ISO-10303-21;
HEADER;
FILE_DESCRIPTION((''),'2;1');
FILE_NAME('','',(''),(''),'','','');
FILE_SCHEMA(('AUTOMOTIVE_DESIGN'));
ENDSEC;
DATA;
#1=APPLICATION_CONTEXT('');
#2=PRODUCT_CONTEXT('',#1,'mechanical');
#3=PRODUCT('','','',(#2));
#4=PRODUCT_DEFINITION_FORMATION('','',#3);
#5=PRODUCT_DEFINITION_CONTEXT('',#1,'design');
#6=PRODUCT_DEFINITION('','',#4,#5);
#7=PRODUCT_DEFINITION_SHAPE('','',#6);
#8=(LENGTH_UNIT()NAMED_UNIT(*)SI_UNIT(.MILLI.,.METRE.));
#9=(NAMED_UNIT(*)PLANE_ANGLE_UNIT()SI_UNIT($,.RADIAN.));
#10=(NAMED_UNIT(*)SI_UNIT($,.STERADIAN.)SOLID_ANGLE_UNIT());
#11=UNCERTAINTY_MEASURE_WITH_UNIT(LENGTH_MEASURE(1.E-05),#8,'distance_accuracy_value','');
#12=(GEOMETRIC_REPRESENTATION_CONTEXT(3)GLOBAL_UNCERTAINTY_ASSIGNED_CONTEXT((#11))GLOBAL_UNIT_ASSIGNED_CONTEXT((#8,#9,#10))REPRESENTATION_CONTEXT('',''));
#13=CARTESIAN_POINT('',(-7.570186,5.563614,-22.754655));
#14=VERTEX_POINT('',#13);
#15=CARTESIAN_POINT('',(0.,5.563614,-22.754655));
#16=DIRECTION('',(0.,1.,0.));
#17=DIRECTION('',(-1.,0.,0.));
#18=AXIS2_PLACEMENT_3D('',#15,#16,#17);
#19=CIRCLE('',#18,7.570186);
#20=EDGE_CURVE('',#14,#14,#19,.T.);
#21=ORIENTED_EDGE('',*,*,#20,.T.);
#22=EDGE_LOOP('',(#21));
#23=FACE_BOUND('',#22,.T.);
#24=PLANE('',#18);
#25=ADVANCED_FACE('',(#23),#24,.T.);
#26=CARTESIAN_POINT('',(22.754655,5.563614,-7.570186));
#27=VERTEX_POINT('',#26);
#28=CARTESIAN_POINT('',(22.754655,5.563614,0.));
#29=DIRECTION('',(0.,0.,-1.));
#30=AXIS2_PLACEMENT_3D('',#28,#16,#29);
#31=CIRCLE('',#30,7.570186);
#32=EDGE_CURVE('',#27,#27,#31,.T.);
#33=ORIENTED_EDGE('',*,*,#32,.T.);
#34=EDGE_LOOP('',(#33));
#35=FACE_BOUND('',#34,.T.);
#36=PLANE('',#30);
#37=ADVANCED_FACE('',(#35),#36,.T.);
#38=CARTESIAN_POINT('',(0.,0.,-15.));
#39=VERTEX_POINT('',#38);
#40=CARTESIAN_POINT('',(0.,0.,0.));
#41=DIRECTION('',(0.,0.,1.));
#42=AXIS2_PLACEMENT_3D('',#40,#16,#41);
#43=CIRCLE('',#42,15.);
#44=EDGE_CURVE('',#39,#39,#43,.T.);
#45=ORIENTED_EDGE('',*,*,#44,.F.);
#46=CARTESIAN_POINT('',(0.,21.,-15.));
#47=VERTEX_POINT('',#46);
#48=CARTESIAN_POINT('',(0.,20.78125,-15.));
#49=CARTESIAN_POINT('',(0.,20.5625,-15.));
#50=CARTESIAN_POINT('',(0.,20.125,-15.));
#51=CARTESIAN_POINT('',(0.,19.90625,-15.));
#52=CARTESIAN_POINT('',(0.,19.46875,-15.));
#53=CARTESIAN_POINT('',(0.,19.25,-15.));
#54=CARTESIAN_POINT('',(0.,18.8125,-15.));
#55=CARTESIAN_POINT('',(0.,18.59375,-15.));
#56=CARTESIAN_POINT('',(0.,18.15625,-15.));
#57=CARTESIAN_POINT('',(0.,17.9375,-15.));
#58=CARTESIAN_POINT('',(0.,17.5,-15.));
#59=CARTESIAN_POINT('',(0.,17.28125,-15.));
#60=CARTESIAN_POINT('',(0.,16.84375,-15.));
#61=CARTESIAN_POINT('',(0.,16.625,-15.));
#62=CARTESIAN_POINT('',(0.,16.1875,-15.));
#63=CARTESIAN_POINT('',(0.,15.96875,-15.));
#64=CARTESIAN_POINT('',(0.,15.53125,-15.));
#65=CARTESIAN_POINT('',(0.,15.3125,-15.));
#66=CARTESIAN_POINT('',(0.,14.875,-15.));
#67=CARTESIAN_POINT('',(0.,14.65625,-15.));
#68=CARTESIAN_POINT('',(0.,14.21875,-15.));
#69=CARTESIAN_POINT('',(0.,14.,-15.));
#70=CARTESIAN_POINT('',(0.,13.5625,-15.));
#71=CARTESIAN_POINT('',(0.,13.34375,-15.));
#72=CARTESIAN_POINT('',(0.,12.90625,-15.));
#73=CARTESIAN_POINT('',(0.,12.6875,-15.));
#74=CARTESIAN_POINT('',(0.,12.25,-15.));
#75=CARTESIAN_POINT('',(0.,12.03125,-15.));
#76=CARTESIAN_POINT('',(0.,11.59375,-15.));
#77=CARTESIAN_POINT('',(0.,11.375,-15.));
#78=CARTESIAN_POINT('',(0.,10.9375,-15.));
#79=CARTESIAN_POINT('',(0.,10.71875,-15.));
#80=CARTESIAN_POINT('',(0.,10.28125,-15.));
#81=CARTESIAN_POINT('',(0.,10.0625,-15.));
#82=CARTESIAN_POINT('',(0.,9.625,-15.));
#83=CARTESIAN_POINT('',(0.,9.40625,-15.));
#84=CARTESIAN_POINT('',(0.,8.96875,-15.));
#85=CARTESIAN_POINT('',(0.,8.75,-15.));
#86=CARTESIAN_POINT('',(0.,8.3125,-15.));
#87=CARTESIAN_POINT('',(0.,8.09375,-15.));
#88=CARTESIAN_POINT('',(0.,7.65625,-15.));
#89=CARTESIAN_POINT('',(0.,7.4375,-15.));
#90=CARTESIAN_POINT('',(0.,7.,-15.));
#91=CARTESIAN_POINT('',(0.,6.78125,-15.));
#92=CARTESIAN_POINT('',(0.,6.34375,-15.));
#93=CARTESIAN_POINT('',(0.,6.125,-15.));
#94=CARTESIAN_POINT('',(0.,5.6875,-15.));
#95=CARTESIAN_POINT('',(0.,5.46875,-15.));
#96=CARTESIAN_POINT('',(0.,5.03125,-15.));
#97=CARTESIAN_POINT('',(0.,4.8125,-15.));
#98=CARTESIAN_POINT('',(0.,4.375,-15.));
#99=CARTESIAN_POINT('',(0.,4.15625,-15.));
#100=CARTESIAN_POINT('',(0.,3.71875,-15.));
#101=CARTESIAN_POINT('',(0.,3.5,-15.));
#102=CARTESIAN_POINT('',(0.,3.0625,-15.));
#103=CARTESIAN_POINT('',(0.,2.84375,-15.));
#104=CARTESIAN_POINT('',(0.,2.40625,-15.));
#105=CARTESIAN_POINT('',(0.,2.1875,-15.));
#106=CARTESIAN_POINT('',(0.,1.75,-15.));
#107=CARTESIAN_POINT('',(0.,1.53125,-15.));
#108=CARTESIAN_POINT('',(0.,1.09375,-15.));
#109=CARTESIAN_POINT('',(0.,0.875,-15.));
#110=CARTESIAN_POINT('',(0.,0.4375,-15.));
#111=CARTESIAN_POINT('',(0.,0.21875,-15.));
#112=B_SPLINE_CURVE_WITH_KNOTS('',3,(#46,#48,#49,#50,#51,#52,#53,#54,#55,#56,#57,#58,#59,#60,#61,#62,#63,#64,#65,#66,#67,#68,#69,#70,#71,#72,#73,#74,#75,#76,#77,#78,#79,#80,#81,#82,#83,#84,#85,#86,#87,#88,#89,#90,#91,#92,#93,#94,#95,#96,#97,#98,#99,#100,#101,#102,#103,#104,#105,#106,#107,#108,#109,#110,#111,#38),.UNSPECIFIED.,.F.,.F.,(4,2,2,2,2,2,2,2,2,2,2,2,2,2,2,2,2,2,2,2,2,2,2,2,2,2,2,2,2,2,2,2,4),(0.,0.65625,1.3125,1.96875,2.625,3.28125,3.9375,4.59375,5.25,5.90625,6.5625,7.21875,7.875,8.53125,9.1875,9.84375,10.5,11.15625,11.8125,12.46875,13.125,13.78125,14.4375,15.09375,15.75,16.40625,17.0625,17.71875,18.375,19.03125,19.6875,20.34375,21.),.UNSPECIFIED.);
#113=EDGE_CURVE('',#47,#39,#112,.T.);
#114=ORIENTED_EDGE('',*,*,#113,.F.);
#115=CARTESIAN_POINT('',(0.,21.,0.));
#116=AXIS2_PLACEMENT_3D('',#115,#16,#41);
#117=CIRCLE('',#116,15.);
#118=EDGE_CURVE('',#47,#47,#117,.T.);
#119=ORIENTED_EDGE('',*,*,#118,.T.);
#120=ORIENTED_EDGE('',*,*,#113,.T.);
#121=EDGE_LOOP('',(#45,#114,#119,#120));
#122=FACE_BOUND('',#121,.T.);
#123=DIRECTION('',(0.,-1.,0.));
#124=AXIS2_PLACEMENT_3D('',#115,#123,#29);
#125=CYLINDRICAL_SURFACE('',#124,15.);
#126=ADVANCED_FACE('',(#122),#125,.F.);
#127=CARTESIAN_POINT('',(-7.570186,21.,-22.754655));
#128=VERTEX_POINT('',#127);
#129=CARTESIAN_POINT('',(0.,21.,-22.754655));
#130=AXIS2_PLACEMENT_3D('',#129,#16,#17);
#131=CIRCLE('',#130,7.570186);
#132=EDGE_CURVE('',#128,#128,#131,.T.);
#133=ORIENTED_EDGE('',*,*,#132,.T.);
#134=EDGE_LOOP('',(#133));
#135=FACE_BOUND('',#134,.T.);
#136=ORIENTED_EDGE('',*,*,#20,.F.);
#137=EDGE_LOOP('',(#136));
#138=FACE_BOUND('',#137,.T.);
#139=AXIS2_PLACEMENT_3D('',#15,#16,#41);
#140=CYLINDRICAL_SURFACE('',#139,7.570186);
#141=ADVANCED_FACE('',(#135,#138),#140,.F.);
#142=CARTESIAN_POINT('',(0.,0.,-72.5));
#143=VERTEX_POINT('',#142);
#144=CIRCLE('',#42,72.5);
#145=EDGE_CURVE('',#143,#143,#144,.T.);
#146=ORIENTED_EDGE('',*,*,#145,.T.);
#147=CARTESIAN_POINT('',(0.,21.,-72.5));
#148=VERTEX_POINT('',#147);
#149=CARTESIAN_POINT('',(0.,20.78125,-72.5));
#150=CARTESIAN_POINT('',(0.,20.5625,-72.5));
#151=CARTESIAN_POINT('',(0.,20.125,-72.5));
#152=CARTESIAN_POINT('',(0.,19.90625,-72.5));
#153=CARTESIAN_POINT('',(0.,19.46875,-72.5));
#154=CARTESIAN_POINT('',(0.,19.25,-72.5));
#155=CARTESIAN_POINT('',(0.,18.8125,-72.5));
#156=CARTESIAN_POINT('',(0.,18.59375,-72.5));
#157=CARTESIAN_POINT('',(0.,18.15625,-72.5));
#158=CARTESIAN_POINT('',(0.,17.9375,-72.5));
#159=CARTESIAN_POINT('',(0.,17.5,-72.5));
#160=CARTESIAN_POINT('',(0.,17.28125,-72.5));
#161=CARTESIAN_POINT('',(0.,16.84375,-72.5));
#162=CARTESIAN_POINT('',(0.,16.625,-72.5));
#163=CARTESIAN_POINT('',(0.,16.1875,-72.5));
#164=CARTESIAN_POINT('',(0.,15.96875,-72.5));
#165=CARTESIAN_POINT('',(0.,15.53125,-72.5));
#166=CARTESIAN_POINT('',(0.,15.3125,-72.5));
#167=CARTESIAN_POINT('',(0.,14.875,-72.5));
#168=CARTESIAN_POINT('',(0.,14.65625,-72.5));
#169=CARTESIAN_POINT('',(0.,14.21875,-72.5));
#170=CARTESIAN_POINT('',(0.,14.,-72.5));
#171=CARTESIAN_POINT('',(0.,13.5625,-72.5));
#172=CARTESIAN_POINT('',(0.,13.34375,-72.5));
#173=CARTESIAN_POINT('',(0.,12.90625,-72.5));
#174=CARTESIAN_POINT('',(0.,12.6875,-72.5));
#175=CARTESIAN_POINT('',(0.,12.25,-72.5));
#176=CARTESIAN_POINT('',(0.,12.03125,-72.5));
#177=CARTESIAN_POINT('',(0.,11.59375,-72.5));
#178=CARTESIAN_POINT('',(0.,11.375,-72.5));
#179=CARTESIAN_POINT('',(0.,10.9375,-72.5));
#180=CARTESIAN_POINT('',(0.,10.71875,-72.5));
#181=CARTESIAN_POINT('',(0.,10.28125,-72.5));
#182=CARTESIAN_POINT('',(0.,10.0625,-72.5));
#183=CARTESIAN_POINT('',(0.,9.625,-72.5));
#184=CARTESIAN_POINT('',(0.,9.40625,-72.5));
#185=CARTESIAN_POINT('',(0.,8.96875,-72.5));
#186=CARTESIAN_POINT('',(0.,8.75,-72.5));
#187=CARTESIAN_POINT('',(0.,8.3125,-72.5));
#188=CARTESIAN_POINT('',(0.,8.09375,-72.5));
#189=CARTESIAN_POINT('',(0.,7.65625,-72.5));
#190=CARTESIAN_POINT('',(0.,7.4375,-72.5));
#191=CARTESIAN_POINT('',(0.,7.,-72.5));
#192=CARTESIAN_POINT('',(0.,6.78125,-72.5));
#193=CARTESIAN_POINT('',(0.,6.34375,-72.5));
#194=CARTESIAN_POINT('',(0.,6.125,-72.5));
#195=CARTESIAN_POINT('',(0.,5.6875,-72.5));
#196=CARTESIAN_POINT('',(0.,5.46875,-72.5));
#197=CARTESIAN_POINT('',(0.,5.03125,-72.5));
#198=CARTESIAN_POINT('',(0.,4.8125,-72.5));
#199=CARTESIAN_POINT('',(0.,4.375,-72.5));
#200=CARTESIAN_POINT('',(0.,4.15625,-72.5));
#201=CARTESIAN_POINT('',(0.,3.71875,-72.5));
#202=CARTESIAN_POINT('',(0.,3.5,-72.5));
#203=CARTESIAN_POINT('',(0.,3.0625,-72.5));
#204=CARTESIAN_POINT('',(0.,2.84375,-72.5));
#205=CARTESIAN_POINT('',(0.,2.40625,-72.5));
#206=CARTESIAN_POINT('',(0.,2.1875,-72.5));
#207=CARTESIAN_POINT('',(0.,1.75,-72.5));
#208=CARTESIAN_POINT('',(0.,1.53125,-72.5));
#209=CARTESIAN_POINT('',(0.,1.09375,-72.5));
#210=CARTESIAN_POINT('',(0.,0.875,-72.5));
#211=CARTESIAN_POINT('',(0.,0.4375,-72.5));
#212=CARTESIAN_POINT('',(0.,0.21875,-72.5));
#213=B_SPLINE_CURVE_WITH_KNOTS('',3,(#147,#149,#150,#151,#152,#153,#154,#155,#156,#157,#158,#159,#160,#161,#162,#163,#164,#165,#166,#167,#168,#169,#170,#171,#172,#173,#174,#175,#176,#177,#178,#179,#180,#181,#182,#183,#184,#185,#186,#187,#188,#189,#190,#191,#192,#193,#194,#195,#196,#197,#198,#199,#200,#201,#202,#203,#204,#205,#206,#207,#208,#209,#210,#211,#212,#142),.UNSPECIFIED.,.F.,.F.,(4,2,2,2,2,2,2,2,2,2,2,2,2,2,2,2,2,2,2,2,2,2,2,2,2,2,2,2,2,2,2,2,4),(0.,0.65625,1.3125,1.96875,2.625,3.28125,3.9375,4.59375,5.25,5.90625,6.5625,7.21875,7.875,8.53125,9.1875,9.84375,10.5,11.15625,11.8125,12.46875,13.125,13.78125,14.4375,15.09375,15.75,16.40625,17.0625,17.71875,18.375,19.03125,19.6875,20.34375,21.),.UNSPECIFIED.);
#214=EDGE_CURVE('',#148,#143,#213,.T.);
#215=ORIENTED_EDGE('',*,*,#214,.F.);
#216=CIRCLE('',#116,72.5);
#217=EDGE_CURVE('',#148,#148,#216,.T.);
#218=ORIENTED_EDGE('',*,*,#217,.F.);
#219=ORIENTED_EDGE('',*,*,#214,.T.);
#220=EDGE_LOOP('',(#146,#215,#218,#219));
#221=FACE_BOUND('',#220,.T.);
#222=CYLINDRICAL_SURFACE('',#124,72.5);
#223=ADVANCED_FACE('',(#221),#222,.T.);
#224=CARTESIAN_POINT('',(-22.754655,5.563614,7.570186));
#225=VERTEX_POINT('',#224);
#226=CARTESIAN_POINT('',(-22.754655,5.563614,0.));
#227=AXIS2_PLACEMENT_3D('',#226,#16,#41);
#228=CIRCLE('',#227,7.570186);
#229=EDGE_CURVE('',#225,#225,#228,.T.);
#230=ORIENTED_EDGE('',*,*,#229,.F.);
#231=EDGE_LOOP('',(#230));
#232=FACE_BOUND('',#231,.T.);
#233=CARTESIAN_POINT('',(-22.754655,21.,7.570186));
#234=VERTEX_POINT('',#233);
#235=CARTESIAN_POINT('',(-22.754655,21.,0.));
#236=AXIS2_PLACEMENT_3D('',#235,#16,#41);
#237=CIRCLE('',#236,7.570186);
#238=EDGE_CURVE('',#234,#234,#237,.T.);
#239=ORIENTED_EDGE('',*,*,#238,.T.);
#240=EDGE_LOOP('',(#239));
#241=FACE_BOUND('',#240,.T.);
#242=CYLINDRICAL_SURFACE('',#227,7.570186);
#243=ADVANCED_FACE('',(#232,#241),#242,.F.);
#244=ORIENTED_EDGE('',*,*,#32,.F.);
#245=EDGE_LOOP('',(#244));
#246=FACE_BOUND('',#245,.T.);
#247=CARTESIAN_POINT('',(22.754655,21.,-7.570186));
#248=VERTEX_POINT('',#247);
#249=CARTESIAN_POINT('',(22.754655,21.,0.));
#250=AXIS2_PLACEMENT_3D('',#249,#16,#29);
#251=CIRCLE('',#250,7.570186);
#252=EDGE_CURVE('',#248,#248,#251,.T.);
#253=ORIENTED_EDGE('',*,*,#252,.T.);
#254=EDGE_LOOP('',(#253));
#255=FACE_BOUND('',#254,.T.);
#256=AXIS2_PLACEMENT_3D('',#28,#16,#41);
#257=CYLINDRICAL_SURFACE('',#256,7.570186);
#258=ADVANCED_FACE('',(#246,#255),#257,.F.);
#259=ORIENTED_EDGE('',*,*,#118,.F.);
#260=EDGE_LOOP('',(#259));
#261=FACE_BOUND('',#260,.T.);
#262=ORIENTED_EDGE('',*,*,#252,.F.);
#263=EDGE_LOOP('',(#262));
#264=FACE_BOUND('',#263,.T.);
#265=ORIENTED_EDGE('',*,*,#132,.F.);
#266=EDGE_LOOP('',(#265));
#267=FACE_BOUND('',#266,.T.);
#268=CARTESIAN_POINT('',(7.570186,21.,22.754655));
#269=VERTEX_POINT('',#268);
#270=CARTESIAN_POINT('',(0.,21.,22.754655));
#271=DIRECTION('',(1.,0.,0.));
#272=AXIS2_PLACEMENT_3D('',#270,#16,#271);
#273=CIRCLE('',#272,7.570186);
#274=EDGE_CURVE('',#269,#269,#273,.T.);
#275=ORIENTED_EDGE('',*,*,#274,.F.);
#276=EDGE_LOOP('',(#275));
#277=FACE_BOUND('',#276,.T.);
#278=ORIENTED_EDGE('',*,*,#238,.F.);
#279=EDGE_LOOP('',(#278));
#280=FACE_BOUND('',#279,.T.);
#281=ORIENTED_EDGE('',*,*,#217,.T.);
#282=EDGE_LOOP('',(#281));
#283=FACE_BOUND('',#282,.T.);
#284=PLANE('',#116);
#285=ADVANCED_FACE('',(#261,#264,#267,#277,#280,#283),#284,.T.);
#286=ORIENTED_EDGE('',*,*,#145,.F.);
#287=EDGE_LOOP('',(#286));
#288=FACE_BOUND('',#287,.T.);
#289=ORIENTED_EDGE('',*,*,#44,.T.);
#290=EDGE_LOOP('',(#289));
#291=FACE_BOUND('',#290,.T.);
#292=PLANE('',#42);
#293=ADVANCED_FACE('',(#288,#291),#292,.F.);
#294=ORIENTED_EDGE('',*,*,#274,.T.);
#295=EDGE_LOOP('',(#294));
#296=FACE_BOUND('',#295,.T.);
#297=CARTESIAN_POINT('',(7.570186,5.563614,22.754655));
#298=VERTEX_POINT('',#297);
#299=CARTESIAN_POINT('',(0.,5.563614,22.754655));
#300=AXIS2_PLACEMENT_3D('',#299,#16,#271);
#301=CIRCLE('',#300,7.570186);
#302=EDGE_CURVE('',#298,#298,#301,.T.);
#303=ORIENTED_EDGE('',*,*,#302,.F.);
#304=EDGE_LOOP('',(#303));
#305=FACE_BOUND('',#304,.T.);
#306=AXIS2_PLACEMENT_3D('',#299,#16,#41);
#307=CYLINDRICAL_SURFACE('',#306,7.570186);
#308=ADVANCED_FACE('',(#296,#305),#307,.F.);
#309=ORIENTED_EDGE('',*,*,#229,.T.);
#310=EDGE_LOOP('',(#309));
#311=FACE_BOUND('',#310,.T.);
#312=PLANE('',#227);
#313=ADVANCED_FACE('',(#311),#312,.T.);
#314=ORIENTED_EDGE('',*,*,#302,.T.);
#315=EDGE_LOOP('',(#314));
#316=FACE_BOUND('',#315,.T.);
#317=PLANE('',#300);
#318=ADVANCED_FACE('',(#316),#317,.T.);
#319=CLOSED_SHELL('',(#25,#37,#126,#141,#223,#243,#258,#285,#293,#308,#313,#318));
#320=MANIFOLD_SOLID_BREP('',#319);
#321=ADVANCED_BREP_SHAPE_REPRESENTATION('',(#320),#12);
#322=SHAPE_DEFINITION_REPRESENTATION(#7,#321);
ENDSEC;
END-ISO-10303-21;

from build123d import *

# Parameters (mm, degrees)
SKETCH1_R           = 72.5
BOSS_EXTRUDE1_DEPTH = 21
SKETCH2_R           = 15
CUT_EXTRUDE1_DEPTH  = 105.658969993
SKETCH3_R           = 7.570186168
CUT_EXTRUDE2_DEPTH  = 15.436386101
CIRPATTERN1_COUNT   = 4


with BuildPart() as part:
    # Sketch1 → Boss-Extrude1 (new body)
    with BuildSketch(Plane(origin=(0, 0, 0), x_dir=(1, 0, 0), z_dir=(0, 1, 0))):
        Circle(SKETCH1_R)
    extrude(amount=BOSS_EXTRUDE1_DEPTH)

    # Sketch2 → Cut-Extrude1 (cut, through all)
    with BuildSketch(Plane(origin=(0, 0, 0), x_dir=(1, 0, 0), z_dir=(0, 1, 0))):
        Circle(SKETCH2_R)
    extrude(amount=CUT_EXTRUDE1_DEPTH, mode=Mode.SUBTRACT)

    # Sketch3 → Cut-Extrude2 (cut)
    with BuildSketch(Plane(origin=(0, 21, 0), x_dir=(1, 0, 0), z_dir=(0, 1, 0))):
        with Locations((-22.754654532, 0)):
            Circle(SKETCH3_R)
    cut_extrude2 = extrude(amount=-CUT_EXTRUDE2_DEPTH, mode=Mode.SUBTRACT)

    # CirPattern1: Cut-Extrude2 ×4 about axis
    cirpattern1_axis = Axis((0, 0, 0), (0, 1, 0))
    for i in range(1, CIRPATTERN1_COUNT):
        add(cut_extrude2.rotate(cirpattern1_axis, i * 360 / CIRPATTERN1_COUNT), mode=Mode.SUBTRACT)


solid = part.part
